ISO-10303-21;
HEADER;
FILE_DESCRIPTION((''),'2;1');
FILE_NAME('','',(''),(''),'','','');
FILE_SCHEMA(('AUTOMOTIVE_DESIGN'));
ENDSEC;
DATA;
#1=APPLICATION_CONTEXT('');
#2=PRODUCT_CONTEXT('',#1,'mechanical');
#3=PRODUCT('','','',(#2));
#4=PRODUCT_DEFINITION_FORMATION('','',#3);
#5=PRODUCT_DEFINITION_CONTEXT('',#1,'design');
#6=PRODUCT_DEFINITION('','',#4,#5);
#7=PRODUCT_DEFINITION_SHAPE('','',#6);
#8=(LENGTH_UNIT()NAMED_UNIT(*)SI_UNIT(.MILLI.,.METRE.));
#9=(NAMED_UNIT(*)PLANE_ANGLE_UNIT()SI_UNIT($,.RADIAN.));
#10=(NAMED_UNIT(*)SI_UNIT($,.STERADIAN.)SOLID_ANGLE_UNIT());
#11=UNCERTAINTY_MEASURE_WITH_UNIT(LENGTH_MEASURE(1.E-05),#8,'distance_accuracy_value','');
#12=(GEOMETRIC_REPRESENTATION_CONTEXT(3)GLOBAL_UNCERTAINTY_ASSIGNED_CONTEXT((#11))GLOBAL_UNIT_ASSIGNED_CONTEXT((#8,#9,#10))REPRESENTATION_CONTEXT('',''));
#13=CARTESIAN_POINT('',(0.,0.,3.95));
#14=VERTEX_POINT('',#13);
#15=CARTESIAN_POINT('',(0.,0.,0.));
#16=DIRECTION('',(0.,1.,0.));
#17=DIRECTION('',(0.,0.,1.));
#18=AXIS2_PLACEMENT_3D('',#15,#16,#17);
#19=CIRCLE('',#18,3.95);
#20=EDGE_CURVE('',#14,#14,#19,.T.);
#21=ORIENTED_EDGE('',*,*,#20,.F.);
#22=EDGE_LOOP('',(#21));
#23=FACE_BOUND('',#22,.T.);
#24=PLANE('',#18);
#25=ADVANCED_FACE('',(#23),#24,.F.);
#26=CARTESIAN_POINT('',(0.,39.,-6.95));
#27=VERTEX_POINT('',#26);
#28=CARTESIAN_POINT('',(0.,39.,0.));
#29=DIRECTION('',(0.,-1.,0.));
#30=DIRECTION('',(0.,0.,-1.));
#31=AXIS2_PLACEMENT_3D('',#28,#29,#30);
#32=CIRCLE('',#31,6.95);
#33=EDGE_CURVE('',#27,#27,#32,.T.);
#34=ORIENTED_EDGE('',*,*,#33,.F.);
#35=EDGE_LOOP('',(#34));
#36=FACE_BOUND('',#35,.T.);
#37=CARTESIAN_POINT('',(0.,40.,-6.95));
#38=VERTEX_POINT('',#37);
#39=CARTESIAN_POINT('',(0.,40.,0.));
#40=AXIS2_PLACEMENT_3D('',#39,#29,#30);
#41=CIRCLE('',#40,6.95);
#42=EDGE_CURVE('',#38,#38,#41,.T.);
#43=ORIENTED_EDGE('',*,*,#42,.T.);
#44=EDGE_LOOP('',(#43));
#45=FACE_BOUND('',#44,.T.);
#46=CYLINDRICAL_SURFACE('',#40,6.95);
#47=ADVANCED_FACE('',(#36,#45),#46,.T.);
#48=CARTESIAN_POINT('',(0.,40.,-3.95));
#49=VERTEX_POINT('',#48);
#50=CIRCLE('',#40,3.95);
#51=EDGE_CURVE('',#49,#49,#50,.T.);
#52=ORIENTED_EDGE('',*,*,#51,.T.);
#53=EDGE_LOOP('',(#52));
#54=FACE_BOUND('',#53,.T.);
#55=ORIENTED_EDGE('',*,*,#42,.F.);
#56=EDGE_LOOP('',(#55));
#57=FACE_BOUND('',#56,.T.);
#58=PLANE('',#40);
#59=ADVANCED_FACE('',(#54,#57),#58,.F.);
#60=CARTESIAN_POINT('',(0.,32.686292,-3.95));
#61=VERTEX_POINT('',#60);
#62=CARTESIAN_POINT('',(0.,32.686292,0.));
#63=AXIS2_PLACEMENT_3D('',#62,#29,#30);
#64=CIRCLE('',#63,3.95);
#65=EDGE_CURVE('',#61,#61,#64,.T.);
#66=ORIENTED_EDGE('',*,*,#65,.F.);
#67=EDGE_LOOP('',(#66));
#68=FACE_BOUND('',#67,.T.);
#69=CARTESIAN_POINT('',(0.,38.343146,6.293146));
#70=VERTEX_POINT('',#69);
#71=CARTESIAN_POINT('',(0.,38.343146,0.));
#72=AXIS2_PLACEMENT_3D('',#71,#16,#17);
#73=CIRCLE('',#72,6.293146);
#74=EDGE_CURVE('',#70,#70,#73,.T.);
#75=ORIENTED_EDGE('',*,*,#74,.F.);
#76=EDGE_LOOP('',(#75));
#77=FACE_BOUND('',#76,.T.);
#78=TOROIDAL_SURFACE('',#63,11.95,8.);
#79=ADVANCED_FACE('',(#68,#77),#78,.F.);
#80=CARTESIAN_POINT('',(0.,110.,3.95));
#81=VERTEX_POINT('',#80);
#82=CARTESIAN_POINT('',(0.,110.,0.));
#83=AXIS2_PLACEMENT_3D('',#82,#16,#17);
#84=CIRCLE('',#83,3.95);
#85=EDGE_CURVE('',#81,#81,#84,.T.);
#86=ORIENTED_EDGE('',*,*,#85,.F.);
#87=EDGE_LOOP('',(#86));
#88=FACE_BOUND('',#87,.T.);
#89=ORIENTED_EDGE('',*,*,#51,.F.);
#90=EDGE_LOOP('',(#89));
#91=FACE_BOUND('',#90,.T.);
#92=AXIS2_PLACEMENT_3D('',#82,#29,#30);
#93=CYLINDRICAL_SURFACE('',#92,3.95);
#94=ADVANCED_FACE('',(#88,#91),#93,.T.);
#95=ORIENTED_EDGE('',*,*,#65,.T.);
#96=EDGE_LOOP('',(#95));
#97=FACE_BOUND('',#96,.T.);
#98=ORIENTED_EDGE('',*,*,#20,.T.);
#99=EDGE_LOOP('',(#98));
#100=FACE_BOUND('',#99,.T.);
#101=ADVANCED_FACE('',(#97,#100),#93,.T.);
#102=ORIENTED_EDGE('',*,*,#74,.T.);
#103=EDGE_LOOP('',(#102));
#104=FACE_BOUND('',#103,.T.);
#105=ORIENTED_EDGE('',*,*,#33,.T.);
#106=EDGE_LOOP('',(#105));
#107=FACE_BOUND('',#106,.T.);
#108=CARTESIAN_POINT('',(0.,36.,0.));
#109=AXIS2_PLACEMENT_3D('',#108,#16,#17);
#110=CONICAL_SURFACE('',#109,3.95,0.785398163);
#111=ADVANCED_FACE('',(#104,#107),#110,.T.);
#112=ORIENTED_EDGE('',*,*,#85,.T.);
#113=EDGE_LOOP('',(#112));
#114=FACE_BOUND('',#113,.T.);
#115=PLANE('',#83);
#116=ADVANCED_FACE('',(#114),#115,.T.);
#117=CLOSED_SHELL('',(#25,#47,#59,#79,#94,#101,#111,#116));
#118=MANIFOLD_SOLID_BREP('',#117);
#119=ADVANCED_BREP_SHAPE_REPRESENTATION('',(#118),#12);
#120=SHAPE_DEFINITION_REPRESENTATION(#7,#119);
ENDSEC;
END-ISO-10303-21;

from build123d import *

# Parameters (mm, degrees)
SKETCH1_R           = 3.95
BOSS_EXTRUDE1_DEPTH = 110
SKETCH2_R           = 6.95
BOSS_EXTRUDE2_DEPTH = 1
CHAMFER1_SIZE       = 3
FILLET1_R           = 8


with BuildPart() as part:
    # Sketch1 → Boss-Extrude1 (new body)
    with BuildSketch(Plane(origin=(0, 0, 0), x_dir=(1, 0, 0), z_dir=(0, 1, 0))):
        with Locations(Location((0, 0, 0), (0, 0, 270))):
            Circle(SKETCH1_R)
    extrude(amount=BOSS_EXTRUDE1_DEPTH)

    # Sketch2 → Boss-Extrude2 (add)
    with BuildSketch(Plane(origin=(0, 39, 0), x_dir=(-1, 0, 0), z_dir=(0, -1, 0))):
        with Locations(Location((0, 0, 0), (0, 0, 90))):
            Circle(SKETCH2_R)
    extrude(amount=-BOSS_EXTRUDE2_DEPTH)

    # Chamfer1
    chamfer1_edges = [part.edges().sort_by_distance(p)[0] for p in [
        (0, 39, -3.95),
    ]]
    chamfer(chamfer1_edges, length=CHAMFER1_SIZE - 0.0001)  # a hair under: the kernel refuses the full size

    # Fillet1
    fillet1_edges = [part.edges().sort_by_distance(p)[0] for p in [
        (0, 36.0001, -3.95),
    ]]
    fillet(fillet1_edges, radius=FILLET1_R)


solid = part.part
